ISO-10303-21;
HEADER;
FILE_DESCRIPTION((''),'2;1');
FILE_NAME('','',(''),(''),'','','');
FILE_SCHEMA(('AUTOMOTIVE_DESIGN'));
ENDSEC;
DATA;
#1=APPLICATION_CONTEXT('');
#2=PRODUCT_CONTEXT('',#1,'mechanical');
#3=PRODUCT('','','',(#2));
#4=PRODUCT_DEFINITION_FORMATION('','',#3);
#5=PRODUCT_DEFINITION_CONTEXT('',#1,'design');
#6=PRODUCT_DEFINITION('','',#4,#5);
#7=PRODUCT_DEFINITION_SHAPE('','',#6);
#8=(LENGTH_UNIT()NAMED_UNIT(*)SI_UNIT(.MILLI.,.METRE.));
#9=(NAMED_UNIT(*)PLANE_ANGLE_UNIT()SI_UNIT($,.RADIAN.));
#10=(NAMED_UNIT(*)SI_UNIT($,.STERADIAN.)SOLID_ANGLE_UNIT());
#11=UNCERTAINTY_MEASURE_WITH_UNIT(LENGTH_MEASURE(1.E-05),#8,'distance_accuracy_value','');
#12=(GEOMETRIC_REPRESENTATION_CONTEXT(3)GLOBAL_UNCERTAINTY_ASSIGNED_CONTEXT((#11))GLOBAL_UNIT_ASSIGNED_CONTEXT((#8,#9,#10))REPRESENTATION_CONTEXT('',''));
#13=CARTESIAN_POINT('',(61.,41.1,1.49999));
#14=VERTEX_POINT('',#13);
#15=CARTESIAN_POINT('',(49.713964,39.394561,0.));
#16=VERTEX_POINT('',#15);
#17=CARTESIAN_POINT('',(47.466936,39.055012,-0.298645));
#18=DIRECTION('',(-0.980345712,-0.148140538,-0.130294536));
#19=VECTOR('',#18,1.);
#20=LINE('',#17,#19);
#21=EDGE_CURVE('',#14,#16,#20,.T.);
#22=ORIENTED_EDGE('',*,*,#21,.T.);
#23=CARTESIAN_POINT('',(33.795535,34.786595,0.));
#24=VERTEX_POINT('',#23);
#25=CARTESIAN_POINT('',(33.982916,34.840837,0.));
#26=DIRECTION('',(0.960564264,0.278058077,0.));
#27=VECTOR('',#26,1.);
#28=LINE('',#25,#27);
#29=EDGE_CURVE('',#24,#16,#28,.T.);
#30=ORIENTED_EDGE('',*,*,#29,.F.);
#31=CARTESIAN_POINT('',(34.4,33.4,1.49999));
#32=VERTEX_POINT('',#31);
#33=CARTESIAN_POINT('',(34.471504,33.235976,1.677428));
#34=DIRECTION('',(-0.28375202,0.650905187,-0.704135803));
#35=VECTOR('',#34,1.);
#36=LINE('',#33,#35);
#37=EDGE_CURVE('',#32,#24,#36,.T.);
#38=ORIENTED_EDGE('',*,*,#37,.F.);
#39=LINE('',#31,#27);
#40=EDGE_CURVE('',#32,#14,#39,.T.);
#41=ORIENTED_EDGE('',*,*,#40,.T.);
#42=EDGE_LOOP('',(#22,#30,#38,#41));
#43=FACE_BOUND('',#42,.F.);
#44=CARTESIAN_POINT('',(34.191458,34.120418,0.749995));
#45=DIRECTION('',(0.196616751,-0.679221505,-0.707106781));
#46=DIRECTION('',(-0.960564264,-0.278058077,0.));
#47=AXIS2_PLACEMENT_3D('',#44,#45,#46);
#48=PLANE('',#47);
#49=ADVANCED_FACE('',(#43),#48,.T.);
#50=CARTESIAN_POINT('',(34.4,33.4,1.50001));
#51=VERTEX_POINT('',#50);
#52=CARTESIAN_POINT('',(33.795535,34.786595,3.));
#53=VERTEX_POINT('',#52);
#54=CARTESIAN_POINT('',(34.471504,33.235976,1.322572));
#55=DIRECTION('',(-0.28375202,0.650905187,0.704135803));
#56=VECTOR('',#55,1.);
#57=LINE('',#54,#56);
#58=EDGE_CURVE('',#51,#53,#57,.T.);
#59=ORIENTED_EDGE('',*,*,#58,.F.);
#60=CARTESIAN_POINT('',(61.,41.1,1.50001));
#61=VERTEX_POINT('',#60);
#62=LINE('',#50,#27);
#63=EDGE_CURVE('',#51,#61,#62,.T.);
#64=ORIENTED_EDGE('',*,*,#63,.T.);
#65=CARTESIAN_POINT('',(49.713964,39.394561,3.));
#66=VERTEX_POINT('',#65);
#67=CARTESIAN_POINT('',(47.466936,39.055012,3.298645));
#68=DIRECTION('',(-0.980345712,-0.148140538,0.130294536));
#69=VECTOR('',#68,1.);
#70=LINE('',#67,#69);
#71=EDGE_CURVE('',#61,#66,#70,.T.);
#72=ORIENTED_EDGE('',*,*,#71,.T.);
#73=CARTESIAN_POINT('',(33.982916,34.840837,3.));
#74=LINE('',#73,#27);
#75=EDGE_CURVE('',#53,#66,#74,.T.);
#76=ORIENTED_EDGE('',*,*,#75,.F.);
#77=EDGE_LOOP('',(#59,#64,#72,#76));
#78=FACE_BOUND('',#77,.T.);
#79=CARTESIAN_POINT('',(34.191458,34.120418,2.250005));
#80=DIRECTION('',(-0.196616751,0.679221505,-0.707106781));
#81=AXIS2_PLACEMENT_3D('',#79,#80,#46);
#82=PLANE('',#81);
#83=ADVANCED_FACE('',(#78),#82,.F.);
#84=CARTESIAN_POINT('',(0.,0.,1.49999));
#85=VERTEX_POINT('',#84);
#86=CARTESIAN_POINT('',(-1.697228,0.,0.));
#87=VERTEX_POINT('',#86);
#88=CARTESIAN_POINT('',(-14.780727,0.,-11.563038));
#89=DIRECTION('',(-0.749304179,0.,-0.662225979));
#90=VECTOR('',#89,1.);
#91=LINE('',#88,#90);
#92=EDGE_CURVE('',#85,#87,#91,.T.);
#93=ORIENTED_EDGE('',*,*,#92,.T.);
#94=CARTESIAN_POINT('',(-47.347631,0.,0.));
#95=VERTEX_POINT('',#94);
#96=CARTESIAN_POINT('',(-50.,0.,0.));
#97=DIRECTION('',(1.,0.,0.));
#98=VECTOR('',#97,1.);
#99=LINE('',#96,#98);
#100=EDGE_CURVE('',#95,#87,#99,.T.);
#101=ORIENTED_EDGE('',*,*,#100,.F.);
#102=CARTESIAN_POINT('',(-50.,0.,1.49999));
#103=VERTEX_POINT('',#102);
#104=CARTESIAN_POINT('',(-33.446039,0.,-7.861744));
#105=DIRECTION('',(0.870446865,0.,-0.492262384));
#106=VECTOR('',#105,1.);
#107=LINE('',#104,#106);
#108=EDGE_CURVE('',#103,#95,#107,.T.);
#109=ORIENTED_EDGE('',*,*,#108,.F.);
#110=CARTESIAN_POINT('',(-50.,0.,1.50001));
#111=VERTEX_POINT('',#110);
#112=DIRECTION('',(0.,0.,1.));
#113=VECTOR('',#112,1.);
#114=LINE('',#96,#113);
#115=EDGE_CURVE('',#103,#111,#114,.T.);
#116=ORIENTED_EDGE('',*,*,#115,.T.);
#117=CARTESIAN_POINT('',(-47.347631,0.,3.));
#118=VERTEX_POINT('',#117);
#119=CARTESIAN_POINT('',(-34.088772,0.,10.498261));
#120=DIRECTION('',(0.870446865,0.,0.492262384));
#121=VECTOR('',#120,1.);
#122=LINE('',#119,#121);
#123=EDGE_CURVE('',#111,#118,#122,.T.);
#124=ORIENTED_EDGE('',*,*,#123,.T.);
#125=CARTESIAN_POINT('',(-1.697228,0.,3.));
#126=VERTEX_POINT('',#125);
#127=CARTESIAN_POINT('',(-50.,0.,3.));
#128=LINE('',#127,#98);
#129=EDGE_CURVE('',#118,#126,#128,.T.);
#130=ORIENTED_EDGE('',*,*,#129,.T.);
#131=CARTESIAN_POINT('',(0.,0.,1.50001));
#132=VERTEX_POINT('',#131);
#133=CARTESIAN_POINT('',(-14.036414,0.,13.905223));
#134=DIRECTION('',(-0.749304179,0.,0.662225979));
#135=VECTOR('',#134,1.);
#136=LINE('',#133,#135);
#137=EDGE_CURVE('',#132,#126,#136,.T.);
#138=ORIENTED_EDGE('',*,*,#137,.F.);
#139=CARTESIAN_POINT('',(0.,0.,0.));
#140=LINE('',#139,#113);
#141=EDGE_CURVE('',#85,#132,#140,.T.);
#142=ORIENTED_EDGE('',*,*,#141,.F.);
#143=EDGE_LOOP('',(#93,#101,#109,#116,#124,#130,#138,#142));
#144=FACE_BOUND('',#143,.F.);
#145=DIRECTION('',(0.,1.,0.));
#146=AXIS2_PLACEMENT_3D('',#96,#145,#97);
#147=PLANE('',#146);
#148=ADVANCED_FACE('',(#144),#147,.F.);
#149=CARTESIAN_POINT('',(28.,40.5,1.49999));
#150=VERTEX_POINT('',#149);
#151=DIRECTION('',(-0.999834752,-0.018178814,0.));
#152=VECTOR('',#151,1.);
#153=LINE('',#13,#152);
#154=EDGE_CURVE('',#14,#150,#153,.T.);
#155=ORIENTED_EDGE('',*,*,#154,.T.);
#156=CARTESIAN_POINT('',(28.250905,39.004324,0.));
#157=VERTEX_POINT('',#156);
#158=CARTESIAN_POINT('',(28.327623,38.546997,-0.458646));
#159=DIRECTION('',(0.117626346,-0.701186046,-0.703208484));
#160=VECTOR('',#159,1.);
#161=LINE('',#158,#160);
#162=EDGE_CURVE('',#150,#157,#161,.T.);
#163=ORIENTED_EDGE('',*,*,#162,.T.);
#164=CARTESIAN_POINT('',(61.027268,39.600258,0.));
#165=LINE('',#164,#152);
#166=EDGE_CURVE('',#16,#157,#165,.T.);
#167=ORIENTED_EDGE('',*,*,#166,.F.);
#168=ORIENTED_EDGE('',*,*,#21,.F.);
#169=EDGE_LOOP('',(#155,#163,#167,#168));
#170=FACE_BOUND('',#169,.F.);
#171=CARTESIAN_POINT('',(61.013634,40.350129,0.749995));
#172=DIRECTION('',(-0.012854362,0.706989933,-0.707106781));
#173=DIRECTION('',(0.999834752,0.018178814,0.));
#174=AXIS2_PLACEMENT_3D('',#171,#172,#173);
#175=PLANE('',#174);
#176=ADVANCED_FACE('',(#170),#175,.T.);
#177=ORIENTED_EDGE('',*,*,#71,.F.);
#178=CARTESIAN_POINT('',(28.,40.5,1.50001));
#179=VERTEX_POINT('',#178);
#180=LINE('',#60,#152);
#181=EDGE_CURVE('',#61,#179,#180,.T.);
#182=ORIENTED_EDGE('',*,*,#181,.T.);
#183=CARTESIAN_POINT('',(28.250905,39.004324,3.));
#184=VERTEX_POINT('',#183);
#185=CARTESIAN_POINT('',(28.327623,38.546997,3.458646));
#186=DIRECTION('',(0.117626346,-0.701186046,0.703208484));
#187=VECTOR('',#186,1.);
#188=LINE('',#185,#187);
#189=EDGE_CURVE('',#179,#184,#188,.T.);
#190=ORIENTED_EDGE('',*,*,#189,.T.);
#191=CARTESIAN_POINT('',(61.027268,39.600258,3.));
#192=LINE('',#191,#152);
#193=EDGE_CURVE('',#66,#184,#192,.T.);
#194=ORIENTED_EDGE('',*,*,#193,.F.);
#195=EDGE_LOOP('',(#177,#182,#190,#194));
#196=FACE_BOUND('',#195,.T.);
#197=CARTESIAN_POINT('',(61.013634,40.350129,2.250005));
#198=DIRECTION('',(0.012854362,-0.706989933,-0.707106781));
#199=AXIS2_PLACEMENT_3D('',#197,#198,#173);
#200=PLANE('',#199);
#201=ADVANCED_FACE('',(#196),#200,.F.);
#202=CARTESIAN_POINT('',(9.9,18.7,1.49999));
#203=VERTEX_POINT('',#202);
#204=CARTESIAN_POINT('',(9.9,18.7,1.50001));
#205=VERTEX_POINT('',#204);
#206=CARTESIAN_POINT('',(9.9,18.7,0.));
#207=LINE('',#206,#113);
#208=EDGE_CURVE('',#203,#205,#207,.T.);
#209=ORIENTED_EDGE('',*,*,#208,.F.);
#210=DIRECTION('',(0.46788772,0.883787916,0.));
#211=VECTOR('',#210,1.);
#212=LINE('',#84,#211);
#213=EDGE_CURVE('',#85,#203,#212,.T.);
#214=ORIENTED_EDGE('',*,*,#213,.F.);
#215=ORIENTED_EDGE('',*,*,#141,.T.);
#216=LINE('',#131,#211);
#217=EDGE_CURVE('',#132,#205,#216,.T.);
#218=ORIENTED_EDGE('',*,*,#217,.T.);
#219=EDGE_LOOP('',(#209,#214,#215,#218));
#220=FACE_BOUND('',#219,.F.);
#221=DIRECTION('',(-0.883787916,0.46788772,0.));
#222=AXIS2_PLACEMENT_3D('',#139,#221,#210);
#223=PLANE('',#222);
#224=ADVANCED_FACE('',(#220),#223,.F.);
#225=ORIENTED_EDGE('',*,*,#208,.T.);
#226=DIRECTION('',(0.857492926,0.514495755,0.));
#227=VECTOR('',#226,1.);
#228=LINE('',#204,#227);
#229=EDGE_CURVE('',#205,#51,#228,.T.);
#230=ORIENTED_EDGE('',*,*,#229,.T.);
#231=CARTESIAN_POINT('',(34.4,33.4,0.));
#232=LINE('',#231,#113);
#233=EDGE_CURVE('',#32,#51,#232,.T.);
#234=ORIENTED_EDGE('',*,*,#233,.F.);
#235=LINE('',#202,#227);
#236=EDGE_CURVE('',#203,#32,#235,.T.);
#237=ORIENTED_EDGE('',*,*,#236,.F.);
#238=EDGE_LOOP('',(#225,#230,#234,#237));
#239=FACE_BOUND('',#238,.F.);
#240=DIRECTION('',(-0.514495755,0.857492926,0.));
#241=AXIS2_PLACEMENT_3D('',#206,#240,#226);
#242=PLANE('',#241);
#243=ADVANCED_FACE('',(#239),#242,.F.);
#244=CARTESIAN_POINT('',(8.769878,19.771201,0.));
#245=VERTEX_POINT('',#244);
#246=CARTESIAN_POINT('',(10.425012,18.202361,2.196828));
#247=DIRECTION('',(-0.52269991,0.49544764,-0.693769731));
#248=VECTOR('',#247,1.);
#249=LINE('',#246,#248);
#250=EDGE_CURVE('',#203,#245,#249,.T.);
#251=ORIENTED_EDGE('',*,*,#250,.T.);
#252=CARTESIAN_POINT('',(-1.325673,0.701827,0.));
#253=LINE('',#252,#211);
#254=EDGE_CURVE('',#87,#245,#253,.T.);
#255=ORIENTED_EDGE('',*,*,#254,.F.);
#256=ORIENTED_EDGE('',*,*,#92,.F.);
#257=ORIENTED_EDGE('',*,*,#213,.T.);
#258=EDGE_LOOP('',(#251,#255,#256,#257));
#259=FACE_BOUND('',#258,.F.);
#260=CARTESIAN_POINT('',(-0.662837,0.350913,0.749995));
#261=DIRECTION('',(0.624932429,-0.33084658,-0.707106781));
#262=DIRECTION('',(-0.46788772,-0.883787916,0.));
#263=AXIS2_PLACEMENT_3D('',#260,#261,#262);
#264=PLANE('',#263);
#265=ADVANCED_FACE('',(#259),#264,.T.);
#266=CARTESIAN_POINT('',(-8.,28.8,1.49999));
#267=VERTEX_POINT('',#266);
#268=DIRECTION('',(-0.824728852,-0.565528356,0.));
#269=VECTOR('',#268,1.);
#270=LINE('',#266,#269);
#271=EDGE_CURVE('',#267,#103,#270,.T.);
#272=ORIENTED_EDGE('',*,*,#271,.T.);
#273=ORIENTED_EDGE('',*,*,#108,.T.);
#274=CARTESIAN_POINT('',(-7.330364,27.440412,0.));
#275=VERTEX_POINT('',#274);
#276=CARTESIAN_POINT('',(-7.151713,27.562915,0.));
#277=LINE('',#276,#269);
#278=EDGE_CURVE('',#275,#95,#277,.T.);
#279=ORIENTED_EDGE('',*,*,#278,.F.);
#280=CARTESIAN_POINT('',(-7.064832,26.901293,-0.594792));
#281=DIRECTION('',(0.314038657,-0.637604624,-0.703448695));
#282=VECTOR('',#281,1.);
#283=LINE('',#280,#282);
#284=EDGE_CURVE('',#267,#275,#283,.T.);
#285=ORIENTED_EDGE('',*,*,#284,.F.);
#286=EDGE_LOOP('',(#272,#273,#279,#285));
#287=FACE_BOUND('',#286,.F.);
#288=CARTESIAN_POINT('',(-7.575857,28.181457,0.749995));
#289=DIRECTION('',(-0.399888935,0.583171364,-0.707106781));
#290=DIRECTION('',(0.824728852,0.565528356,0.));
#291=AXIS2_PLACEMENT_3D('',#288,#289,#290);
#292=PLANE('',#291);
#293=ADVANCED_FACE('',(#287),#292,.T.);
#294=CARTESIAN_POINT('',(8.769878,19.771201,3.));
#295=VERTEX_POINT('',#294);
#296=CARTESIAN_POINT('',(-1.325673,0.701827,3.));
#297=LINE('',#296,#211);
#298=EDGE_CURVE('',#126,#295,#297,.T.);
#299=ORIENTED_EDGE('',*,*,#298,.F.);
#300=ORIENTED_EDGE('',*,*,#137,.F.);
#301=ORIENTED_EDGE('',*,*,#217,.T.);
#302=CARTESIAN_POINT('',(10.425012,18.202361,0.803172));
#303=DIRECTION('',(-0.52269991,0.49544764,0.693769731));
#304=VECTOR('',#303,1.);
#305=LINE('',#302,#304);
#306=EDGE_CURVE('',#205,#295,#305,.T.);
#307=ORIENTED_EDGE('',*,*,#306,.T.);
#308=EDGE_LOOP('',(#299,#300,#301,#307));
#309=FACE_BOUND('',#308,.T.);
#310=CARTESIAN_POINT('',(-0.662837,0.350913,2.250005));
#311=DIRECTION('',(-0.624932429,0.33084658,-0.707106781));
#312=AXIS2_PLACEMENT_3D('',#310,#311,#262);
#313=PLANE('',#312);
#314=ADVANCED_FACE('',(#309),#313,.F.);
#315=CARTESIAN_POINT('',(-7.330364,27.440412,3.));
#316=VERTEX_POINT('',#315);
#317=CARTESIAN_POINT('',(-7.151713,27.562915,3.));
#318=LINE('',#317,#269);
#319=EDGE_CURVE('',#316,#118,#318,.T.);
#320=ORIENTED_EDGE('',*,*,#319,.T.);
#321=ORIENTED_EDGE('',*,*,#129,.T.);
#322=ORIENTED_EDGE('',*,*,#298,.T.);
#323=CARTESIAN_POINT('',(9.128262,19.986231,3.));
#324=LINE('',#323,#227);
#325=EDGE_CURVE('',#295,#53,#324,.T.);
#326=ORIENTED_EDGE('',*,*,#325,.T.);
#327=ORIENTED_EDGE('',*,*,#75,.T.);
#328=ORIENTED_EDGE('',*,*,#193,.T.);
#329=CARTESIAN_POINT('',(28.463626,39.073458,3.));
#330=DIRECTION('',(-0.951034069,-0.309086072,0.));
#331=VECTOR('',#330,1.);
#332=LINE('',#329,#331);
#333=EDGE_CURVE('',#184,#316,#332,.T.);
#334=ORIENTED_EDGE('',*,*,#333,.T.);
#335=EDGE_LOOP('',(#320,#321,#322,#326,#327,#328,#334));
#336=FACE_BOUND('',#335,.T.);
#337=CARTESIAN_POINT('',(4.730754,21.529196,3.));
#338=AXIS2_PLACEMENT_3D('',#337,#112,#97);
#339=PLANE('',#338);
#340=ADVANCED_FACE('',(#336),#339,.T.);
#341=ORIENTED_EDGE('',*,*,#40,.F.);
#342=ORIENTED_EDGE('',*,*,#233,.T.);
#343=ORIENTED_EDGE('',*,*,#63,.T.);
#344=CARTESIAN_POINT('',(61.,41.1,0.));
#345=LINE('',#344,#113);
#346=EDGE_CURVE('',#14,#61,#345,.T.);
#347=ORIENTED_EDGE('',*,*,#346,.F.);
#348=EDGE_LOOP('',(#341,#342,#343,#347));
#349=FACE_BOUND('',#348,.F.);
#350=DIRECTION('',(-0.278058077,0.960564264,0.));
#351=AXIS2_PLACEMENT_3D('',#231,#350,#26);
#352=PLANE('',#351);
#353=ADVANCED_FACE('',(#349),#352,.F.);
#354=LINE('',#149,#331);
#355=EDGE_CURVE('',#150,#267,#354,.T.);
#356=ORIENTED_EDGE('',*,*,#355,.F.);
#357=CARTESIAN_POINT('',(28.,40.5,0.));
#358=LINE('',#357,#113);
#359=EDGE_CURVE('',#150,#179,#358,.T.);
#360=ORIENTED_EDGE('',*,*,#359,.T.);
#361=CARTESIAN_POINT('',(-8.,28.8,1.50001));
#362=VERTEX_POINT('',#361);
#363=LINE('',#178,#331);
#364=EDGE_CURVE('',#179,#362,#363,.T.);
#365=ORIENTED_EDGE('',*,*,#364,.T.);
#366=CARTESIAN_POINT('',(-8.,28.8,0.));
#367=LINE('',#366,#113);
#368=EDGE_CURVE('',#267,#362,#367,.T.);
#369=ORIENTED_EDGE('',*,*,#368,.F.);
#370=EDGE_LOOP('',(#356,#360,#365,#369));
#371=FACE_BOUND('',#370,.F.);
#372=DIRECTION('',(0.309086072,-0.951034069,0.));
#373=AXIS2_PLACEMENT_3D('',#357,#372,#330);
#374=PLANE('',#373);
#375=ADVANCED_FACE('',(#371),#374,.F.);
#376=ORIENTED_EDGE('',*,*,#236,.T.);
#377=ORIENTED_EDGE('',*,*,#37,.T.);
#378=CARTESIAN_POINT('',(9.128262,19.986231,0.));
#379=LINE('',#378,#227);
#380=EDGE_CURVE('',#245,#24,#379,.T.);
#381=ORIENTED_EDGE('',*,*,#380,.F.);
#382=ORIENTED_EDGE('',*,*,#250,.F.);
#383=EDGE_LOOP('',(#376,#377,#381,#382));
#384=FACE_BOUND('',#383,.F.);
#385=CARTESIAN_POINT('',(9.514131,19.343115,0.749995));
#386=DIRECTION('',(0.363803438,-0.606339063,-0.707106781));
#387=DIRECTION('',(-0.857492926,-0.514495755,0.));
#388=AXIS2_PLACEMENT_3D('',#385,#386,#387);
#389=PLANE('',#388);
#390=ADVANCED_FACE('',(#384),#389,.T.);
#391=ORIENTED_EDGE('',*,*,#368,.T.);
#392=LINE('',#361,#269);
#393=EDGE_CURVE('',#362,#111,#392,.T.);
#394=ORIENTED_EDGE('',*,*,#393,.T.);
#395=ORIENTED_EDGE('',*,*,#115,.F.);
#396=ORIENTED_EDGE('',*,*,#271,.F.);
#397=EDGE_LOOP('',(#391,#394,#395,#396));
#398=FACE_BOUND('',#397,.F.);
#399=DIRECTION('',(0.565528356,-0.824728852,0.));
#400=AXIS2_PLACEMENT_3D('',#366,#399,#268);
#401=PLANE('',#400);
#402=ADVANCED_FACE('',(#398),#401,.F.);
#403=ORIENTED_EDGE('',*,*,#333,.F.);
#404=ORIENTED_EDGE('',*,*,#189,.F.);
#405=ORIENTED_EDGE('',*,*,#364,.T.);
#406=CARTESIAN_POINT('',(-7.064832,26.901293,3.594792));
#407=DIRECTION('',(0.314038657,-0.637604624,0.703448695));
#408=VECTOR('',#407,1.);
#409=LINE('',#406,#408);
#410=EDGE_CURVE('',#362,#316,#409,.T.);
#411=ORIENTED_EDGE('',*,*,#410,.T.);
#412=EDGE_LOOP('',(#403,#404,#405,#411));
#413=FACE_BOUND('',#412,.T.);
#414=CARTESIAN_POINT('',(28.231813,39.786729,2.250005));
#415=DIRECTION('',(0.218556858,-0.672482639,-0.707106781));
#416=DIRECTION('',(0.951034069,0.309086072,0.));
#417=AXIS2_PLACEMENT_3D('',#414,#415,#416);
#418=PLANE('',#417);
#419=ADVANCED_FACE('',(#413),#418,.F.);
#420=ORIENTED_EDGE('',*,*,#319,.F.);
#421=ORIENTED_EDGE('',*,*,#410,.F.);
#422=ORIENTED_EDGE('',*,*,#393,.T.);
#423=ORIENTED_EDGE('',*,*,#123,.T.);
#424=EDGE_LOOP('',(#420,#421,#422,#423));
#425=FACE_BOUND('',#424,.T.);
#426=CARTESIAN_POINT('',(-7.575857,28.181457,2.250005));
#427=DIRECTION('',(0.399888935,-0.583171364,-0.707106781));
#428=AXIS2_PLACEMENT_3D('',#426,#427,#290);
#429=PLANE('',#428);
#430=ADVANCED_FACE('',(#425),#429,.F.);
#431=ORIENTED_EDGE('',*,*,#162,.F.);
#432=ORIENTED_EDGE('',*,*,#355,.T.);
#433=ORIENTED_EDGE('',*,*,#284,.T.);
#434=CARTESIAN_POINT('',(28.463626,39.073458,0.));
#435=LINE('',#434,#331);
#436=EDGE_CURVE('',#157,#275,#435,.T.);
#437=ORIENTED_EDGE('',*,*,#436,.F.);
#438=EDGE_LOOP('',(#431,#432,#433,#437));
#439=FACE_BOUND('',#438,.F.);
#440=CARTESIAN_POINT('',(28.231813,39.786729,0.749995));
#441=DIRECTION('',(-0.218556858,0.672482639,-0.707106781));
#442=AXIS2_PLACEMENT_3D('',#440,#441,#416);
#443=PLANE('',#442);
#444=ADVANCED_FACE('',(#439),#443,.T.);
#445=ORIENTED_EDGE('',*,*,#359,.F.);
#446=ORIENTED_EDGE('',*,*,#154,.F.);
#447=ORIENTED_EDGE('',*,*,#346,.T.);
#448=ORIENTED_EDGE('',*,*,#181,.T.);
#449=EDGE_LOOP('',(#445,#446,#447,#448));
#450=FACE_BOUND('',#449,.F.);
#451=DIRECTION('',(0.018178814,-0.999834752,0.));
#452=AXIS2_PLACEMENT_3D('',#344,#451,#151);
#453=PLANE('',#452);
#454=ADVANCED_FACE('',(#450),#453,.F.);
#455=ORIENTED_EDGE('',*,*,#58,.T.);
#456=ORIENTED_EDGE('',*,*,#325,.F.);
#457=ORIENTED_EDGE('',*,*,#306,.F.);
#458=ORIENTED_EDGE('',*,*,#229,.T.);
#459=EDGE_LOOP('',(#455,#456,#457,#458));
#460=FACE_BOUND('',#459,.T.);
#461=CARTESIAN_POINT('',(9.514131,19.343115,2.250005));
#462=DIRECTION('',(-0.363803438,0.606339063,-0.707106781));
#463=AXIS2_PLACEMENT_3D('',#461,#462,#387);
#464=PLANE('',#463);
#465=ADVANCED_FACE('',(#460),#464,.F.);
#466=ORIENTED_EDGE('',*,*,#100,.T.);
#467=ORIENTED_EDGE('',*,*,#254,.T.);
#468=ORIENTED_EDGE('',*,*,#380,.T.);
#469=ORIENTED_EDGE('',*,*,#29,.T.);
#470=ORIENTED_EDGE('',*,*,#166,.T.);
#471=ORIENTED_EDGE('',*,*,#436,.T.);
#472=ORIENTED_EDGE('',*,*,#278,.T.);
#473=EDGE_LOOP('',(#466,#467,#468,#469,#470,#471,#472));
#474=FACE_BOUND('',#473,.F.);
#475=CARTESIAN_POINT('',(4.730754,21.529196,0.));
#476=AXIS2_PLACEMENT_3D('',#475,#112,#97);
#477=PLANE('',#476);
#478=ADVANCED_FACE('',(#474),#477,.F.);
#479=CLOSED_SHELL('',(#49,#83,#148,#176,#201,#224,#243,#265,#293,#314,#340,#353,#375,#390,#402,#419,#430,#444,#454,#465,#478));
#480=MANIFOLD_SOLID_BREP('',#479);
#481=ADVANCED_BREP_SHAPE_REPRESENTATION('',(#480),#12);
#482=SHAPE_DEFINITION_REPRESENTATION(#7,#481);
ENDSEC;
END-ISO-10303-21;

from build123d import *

# Parameters (mm, degrees)
F1_DEPTH = 3
F2_SIZE  = 1.49999


# Not quite as in the source:
# - a fillet or chamfer is up to 0.001 mm smaller than in the source, because OpenCascade refuses the exact size


with BuildPart() as f1:
    # F0 (on Top) → F1 (new body)
    with BuildSketch(Plane.XY):
        Polygon((-50, 0), (0, 0), (9.9, 18.7), (34.4, 33.4), (61, 41.1), (28, 40.5), (-8, 28.8), align=None)
    extrude(amount=F1_DEPTH)

    # F2 (size 1.5 in the source; OpenCascade refuses exactly that, so slightly less here)
    f2_edges = [f1.edges().sort_by_distance(p)[0] for p in [
        (-29, 14.4, 3),
        (10, 34.65, 3),
        (10, 34.65, 0),
        (-29, 14.4, 0),
        (44.5, 40.8, 0),
        (44.5, 40.8, 3),
        (47.7, 37.25, 3),
        (47.7, 37.25, 0),
        (22.15, 26.05, 3),
        (22.15, 26.05, 0),
        (4.95, 9.35, 3),
        (4.95, 9.35, 0),
    ]]
    chamfer(f2_edges, length=F2_SIZE)


solid = f1.part
